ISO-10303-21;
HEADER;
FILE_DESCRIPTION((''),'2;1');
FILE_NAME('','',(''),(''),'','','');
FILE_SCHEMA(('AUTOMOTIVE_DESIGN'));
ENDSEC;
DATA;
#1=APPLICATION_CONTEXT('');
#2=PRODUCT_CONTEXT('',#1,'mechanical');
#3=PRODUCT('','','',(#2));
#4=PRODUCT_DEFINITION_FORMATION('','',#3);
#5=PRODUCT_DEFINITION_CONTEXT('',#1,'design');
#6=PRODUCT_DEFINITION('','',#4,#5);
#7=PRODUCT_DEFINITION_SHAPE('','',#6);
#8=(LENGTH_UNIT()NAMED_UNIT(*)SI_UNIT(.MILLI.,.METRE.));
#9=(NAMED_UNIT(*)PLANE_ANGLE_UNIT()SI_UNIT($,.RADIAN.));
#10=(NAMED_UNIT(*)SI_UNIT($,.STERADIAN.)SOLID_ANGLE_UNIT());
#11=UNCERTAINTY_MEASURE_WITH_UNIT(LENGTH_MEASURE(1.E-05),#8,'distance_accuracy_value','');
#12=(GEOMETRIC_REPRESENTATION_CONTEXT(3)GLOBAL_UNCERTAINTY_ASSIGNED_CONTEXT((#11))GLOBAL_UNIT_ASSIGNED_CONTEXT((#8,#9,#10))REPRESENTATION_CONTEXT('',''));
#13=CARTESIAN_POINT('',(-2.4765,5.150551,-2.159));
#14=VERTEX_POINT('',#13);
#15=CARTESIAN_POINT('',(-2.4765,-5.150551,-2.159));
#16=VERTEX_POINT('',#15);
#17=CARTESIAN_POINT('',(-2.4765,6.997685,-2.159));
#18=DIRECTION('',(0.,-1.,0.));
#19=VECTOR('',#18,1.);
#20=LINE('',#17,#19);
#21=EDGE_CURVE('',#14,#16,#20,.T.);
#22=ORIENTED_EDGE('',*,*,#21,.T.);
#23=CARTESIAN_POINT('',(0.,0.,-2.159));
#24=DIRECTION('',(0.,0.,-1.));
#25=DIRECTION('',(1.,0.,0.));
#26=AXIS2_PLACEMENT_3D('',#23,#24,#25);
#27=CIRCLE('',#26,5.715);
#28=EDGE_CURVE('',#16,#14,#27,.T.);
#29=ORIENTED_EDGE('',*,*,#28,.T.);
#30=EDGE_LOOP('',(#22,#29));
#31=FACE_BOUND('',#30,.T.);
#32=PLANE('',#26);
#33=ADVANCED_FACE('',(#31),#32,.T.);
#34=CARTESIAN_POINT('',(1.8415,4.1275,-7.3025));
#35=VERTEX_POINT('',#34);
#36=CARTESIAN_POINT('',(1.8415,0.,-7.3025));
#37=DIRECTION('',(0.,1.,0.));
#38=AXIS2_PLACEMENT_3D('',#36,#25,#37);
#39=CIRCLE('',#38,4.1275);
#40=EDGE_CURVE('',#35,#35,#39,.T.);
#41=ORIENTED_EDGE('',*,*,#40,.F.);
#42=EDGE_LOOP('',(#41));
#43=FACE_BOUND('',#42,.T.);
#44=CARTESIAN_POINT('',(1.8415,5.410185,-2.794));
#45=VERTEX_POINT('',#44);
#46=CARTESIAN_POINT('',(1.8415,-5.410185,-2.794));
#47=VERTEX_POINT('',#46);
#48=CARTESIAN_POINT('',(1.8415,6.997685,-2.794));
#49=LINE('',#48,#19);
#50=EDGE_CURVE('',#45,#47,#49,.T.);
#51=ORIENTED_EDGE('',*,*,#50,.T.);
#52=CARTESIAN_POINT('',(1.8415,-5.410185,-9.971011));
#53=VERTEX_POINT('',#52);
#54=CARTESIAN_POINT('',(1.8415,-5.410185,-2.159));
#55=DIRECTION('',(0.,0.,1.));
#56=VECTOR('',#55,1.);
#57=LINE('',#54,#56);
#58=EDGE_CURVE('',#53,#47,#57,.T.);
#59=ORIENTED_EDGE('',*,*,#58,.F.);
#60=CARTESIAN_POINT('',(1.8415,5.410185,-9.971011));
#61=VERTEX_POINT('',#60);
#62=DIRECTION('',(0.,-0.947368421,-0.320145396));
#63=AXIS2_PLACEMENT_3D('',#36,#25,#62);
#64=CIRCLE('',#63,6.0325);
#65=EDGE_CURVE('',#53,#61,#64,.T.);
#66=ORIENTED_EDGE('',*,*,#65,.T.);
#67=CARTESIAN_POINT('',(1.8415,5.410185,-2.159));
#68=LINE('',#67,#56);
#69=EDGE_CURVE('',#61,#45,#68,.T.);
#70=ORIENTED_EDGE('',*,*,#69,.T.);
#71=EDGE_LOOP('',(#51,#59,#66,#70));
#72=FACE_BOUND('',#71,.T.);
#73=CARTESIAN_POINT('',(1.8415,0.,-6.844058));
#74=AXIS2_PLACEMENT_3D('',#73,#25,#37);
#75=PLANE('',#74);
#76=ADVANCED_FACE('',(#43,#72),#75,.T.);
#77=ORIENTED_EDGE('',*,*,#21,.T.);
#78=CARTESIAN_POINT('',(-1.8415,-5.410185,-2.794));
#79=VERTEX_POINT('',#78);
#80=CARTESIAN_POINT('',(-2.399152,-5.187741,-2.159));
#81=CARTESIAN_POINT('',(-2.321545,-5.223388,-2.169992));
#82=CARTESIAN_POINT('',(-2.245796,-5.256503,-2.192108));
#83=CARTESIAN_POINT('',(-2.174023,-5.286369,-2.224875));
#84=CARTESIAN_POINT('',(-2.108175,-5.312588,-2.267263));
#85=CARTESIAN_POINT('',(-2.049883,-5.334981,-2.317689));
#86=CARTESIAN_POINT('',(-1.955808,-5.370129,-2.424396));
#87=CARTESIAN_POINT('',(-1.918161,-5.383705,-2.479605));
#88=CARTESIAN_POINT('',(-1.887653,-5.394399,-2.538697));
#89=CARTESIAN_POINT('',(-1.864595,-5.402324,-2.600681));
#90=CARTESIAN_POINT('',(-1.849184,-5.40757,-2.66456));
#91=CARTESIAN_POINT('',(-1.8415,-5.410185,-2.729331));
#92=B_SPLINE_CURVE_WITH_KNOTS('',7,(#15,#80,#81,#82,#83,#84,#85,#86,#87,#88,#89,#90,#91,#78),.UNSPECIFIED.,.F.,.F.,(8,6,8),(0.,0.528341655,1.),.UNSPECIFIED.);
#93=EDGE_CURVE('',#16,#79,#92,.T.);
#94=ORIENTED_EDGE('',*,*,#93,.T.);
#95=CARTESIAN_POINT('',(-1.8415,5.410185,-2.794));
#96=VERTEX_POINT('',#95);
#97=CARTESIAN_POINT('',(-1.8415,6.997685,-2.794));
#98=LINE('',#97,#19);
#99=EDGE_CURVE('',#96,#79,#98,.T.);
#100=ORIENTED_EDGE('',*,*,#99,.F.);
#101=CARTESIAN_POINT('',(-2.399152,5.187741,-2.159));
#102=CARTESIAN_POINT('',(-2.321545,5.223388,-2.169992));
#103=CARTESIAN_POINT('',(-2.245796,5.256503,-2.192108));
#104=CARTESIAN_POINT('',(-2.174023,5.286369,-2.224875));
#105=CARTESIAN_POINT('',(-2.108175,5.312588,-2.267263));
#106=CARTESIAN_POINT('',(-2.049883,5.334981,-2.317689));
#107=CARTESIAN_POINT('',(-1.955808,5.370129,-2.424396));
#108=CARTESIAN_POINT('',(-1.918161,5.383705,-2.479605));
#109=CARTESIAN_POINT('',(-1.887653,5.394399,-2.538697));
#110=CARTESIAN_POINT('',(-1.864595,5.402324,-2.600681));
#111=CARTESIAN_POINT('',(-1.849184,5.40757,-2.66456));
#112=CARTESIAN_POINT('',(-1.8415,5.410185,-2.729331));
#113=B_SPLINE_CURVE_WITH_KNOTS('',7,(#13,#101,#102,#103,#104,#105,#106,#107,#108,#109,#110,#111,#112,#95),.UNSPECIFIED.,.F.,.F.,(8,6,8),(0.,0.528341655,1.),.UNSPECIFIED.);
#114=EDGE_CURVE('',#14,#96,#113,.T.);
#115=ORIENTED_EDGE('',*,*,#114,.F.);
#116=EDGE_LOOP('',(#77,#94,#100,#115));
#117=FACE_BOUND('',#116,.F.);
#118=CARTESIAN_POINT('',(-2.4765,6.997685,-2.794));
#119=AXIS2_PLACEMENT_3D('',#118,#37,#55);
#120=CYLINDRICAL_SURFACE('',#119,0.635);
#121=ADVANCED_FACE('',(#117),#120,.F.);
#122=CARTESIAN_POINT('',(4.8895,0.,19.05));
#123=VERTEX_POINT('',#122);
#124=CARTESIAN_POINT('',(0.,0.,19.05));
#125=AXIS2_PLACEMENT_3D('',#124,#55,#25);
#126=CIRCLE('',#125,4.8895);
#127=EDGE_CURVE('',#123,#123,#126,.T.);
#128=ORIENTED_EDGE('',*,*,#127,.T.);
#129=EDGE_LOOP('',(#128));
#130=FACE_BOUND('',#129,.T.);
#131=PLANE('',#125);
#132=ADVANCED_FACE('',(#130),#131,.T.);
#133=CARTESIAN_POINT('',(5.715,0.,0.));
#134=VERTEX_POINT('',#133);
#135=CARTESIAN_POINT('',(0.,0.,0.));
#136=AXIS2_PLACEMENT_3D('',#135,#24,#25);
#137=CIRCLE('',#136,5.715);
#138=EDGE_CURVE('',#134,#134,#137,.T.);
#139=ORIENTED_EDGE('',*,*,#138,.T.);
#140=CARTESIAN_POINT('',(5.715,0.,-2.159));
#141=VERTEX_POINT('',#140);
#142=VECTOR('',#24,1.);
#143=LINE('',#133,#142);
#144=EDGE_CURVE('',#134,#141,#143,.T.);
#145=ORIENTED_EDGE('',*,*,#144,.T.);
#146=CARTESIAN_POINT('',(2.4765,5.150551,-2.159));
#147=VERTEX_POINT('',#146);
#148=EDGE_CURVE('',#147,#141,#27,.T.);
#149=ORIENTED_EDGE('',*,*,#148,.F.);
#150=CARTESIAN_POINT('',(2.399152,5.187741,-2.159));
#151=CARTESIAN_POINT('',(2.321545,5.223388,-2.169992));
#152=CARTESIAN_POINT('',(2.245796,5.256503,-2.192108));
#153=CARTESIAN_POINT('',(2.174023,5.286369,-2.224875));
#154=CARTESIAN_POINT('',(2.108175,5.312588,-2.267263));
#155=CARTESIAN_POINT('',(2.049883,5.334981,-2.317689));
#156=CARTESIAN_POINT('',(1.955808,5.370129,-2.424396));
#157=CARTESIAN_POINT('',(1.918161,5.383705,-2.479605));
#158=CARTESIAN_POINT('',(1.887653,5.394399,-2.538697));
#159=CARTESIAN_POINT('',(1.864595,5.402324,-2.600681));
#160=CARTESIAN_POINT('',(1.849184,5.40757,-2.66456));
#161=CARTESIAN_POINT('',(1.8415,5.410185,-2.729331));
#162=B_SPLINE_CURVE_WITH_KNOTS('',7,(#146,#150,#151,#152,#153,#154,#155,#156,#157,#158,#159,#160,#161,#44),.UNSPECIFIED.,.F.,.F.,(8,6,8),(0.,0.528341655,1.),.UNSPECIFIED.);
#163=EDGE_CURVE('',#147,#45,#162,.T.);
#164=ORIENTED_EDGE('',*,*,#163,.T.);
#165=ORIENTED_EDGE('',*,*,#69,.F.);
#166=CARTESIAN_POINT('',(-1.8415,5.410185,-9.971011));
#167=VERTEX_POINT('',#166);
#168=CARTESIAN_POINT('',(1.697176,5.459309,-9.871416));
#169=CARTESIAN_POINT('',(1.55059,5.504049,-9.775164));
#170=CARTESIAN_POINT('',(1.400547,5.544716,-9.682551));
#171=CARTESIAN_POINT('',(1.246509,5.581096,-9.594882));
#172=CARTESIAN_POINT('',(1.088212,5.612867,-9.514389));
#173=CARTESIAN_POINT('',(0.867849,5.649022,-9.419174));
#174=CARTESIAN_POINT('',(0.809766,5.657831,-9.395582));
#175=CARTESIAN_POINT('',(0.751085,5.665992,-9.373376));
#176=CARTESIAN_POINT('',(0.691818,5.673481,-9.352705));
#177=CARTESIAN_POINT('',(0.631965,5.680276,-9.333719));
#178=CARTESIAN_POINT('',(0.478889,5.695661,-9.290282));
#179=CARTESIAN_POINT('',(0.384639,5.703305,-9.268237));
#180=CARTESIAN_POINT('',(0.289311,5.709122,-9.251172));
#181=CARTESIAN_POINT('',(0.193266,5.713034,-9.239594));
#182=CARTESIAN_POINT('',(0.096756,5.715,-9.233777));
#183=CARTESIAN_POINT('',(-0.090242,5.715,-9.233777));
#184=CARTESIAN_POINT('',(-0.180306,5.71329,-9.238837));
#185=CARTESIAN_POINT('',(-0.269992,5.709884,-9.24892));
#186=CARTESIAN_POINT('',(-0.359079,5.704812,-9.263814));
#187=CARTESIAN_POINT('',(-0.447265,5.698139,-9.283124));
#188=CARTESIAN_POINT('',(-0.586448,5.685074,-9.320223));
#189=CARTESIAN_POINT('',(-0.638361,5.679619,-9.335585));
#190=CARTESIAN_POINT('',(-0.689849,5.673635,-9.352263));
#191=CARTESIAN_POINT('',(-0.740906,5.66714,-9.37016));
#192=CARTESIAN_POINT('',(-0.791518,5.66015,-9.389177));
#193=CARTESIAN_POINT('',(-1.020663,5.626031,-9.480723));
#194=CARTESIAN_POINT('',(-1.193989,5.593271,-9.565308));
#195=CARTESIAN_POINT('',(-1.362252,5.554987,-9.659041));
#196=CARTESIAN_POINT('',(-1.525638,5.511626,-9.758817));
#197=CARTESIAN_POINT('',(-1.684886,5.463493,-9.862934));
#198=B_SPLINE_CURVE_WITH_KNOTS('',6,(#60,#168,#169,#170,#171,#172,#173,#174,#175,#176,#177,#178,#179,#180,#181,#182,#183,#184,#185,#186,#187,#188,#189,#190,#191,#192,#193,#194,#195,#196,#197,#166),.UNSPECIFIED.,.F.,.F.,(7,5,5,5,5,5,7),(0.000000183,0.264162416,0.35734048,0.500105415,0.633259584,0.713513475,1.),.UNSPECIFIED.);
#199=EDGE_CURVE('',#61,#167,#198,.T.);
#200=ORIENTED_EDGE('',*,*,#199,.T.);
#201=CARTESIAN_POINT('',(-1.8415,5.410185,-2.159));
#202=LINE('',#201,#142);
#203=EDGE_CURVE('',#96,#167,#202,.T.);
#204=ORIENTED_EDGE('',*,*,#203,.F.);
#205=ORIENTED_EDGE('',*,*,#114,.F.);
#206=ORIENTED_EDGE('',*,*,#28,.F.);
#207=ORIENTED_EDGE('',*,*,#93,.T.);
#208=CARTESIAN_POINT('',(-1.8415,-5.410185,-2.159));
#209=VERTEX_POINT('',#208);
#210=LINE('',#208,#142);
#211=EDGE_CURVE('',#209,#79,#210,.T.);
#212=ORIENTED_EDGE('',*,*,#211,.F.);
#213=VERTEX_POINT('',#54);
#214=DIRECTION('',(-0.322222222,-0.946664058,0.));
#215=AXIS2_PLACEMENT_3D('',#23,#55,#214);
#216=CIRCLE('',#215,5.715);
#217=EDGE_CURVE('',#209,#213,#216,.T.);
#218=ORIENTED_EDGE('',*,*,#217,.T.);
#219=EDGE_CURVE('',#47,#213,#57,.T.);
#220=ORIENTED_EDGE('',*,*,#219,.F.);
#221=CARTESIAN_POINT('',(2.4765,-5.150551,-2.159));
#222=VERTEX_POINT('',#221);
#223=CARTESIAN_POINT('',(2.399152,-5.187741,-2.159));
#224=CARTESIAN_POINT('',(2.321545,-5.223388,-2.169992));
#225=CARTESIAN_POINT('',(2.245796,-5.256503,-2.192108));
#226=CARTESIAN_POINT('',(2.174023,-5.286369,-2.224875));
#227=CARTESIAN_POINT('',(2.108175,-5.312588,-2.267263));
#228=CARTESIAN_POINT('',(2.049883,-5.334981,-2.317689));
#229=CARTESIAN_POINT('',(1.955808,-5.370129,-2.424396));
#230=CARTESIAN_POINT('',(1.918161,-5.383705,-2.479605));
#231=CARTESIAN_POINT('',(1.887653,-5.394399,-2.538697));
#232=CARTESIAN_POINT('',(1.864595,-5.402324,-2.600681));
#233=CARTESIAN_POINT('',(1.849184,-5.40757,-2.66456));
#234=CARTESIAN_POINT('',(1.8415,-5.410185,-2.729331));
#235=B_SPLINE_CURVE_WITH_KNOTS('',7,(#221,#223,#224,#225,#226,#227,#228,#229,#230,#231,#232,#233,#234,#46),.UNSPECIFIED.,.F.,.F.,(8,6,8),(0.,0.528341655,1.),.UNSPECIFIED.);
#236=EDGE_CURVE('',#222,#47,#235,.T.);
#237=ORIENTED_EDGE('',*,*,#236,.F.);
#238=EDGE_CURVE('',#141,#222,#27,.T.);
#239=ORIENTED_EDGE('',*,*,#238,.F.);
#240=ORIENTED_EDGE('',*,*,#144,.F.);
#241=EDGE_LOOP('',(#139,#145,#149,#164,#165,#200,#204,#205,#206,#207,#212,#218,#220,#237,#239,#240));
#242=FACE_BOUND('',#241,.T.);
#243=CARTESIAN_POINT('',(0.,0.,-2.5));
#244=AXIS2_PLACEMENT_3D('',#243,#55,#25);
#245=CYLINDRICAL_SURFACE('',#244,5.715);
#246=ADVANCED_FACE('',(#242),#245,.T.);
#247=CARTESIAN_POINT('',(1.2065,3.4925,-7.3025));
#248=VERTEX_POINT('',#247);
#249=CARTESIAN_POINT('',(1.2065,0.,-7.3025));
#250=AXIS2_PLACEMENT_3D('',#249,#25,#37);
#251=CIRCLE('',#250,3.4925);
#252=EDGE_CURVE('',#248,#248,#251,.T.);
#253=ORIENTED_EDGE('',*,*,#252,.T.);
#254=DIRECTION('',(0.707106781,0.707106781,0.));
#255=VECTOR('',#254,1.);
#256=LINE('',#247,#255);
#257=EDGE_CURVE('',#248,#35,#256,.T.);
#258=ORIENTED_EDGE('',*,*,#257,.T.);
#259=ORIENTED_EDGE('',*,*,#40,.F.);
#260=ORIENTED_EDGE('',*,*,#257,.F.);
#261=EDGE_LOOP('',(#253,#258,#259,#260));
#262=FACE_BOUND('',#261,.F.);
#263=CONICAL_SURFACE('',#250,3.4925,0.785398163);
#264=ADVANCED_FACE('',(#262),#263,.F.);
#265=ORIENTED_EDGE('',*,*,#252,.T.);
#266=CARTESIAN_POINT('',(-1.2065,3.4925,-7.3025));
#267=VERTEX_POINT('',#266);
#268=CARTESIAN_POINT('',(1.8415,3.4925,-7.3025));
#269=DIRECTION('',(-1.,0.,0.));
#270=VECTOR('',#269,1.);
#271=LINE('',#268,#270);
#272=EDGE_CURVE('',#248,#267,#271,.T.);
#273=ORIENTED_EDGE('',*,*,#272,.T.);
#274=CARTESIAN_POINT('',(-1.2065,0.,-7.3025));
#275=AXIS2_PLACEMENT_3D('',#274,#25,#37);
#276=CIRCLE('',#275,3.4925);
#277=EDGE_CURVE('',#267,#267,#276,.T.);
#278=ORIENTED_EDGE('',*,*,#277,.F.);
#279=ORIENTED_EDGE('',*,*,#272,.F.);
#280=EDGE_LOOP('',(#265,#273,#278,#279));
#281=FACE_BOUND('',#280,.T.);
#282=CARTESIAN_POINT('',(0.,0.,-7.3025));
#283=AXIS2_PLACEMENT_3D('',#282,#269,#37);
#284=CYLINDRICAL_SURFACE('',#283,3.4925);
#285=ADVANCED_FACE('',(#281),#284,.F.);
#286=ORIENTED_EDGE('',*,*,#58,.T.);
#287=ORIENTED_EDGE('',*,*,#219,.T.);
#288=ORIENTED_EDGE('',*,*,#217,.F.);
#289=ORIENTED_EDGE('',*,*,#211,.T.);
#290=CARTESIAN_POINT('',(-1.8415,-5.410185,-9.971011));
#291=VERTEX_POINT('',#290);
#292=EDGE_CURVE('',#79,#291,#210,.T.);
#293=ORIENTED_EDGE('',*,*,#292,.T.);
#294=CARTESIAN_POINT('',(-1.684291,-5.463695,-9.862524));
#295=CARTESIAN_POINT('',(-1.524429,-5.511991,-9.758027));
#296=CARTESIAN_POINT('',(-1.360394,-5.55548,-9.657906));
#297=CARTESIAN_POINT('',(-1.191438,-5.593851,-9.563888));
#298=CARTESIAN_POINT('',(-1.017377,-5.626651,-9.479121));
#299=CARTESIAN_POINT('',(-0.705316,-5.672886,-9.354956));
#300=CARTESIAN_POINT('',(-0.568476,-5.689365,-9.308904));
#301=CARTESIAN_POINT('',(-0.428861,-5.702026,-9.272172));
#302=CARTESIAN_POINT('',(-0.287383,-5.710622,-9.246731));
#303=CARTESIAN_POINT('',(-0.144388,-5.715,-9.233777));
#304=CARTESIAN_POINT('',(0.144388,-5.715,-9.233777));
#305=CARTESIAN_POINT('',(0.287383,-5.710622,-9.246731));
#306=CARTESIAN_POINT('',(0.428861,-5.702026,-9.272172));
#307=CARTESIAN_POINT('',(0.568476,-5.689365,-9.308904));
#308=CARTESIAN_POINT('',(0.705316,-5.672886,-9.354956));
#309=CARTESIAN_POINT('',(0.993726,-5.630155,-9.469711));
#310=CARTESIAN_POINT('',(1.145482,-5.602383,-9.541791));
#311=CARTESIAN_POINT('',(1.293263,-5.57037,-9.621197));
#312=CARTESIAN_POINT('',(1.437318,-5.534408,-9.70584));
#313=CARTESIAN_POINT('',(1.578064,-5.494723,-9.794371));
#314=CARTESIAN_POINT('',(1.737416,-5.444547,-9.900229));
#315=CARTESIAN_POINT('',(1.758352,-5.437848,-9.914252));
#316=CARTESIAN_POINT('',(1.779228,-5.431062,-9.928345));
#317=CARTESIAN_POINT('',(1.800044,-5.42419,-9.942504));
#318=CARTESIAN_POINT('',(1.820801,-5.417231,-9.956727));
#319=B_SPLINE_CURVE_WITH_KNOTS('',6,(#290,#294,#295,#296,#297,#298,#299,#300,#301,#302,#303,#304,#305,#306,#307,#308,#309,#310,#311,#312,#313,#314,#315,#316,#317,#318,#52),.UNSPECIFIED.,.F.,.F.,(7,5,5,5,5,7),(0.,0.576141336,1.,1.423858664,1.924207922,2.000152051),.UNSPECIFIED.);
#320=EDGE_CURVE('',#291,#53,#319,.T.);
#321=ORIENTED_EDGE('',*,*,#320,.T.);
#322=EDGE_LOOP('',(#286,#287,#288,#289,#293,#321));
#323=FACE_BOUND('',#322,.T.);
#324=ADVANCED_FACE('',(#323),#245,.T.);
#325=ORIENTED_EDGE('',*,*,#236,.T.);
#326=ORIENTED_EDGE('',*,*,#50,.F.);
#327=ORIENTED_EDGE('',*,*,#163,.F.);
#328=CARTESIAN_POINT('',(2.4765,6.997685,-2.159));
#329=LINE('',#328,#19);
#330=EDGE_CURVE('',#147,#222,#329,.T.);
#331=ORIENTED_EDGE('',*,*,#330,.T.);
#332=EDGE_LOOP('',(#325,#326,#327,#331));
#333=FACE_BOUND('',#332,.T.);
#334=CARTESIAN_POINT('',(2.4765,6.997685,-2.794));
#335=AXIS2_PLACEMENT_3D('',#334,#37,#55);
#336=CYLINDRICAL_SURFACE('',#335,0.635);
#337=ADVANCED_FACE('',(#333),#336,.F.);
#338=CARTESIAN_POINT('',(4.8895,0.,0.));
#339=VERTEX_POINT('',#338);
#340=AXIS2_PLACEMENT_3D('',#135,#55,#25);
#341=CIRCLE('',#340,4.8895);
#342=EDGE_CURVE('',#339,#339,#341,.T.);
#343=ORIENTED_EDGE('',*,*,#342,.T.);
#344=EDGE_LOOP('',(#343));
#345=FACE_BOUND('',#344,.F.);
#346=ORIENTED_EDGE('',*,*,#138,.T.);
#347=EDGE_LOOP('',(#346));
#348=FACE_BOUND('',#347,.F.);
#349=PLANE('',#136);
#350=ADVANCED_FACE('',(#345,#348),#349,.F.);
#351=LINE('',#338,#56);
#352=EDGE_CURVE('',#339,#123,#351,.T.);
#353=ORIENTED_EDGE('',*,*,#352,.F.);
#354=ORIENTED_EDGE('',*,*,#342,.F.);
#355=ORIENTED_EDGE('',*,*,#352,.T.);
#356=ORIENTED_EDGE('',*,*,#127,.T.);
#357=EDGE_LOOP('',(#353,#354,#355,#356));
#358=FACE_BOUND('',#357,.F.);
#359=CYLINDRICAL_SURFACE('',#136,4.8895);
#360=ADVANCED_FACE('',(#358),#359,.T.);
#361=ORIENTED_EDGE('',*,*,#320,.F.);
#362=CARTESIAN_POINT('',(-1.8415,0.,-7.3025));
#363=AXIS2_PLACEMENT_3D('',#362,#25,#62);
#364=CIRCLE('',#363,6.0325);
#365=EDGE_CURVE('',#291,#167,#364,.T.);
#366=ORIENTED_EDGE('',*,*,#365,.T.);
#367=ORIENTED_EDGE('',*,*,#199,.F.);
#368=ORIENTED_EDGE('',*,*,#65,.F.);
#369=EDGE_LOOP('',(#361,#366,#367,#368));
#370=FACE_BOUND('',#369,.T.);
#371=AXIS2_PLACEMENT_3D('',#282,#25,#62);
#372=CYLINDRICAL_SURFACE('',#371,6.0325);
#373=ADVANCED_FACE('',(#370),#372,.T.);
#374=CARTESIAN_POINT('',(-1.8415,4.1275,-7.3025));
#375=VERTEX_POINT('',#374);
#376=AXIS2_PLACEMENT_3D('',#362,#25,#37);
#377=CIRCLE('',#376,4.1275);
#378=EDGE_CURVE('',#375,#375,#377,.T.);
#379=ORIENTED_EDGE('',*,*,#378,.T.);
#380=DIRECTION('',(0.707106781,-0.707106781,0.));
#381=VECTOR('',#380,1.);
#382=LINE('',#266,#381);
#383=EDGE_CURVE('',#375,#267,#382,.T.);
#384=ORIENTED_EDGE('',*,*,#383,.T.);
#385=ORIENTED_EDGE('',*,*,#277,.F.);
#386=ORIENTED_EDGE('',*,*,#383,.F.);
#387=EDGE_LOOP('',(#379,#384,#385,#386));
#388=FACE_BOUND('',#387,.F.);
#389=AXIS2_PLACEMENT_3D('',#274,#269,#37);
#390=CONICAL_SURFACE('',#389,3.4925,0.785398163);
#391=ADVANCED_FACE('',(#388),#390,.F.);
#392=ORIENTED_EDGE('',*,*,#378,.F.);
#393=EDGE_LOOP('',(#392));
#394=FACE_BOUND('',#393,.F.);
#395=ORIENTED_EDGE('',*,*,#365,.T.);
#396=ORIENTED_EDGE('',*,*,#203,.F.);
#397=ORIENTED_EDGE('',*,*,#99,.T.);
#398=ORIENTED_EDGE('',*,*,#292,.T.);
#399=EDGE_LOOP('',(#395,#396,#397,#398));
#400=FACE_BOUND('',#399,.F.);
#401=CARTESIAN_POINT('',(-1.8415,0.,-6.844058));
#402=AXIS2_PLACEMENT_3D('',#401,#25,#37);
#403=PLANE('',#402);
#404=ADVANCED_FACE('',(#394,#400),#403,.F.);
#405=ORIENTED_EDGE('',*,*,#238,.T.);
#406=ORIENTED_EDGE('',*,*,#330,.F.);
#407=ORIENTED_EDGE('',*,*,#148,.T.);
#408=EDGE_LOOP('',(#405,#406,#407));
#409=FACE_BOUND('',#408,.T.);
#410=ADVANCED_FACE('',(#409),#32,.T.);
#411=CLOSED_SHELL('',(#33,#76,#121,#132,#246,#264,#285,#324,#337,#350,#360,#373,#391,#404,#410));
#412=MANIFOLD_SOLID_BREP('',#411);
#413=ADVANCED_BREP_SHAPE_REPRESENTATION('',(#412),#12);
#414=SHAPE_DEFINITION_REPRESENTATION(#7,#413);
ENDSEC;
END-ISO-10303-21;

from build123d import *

# Parameters (mm, degrees)
F0_R          = 4.8895
F1_DEPTH      = 19.05
F2_R          = 5.715
F3_DEPTH      = 2.159
F4_R          = 3.4925
F5_DEPTH      = 1.8415
F5_DEPTH_BACK = 1.8415
F6_R          = 8.89
F7_DEPTH      = 25.4
F8_T4_DEPTH   = 13.9953701878
F8_S5_R       = 5.715
F8_T6_DEPTH   = 9
F8_T10_DEPTH  = 13.9953701878
F8_S11_R      = 5.715
F8_T12_DEPTH  = 9
F9_SIZE       = 0.635


# Not quite as in the source:
# - a fillet or chamfer that OpenCascade refuses, or shapes differently, is made with other operations: its cross-section is extruded or revolved along the edge and cut away or added
# - after a boolean that leaves OpenCascade's solid faulty, fix() repairs it


with BuildPart() as f1:
    # F0 (on Top) → F1 (new body)
    with BuildSketch(Plane.XY):
        Circle(F0_R)
    extrude(amount=F1_DEPTH)

    # F2 (on face) → F3 (join)
    with BuildSketch(Plane(origin=(0, 0, 0), x_dir=(1, 0, 0), z_dir=(0, 0, -1))):
        Circle(F2_R)
    extrude(amount=F3_DEPTH)

    # F4 (on Right) → F5 (join, two sides)
    with BuildSketch(Plane.YZ) as f5_sk:
        with BuildLine():
            Line((5.715, -2.159), (-5.715, -2.159))
            Line((-5.715, -2.159), (-5.715, -9.2337771034))
            ThreePointArc((-5.715, -9.2337771034), (0, -13.335), (5.715, -9.2337771034))
            Line((5.715, -9.2337771034), (5.715, -2.159))
        make_face()
        with Locations((0, -7.3025)):
            Circle(F4_R, mode=Mode.SUBTRACT)
    extrude(amount=F5_DEPTH)
    extrude(f5_sk.sketch, amount=-F5_DEPTH_BACK)

    # F6 (on face) → F7 (cut)
    with BuildSketch(Plane(origin=(0, 0, -2.159), x_dir=(1, 0, 0), z_dir=(0, 0, -1))):
        Circle(F6_R)
        with BuildLine():
            ThreePointArc((-1.8415, 5.4101850939), (3.3269394719, 4.6467944596), (5.715, 0))
            ThreePointArc((5.715, 0), (3.3269394719, -4.6467944596), (-1.8415, -5.4101850939))
            ThreePointArc((-1.8415, -5.4101850939), (-5.715, 0), (-1.8415, 5.4101850939))
        make_face(mode=Mode.SUBTRACT)
    extrude(amount=F7_DEPTH, mode=Mode.SUBTRACT)

    add(f1.part.fix(), mode=Mode.REPLACE)

    # F8: fillet of radius 0.635 on 2 edges, made by hand


with BuildPart() as f8_tool2:
    # F8_s3 → F8_t4 (new body)
    with BuildSketch(Plane.XZ.offset(-6.9976850939)):
        with BuildLine():
            ThreePointArc((2.4765, -2.159), (2.0274871939, -2.3449871939), (1.8415, -2.794))
            Line((1.8415, -2.794), (1.8415, -2.159))
            Line((1.8415, -2.159), (2.4765, -2.159))
        make_face()
    extrude(amount=F8_T4_DEPTH)

    # F8_s5 → F8_t6 (intersect, symmetric)
    with BuildSketch(Plane.XY.offset(-2.5)):
        Circle(F8_S5_R)
    extrude(amount=F8_T6_DEPTH, both=True, mode=Mode.INTERSECT)


with BuildPart() as f1_1:
    add(f1.part)

    # F8_t1: union F8_tool2
    add(f8_tool2.part)


with BuildPart() as f8_tool8:
    # F8_s9 → F8_t10 (new body)
    with BuildSketch(Plane.XZ.offset(-6.9976850939)):
        with BuildLine():
            ThreePointArc((-2.4765, -2.159), (-2.0274871939, -2.3449871939), (-1.8415, -2.794))
            Line((-1.8415, -2.794), (-1.8415, -2.159))
            Line((-1.8415, -2.159), (-2.4765, -2.159))
        make_face()
    extrude(amount=F8_T10_DEPTH)

    # F8_s11 → F8_t12 (intersect, symmetric)
    with BuildSketch(Plane.XY.offset(-2.5)):
        Circle(F8_S11_R)
    extrude(amount=F8_T12_DEPTH, both=True, mode=Mode.INTERSECT)


with BuildPart() as f1_2:
    add(f1_1.part)

    # F8_t7: union F8_tool8
    add(f8_tool8.part)

    # F9
    f9_edges = [f1_2.edges().sort_by_distance(p)[0] for p in [
        (-1.8415, -3.4925, -7.3025),
        (1.8415, -3.4925, -7.3025),
    ]]
    chamfer(f9_edges, length=F9_SIZE)


solid = f1_2.part
